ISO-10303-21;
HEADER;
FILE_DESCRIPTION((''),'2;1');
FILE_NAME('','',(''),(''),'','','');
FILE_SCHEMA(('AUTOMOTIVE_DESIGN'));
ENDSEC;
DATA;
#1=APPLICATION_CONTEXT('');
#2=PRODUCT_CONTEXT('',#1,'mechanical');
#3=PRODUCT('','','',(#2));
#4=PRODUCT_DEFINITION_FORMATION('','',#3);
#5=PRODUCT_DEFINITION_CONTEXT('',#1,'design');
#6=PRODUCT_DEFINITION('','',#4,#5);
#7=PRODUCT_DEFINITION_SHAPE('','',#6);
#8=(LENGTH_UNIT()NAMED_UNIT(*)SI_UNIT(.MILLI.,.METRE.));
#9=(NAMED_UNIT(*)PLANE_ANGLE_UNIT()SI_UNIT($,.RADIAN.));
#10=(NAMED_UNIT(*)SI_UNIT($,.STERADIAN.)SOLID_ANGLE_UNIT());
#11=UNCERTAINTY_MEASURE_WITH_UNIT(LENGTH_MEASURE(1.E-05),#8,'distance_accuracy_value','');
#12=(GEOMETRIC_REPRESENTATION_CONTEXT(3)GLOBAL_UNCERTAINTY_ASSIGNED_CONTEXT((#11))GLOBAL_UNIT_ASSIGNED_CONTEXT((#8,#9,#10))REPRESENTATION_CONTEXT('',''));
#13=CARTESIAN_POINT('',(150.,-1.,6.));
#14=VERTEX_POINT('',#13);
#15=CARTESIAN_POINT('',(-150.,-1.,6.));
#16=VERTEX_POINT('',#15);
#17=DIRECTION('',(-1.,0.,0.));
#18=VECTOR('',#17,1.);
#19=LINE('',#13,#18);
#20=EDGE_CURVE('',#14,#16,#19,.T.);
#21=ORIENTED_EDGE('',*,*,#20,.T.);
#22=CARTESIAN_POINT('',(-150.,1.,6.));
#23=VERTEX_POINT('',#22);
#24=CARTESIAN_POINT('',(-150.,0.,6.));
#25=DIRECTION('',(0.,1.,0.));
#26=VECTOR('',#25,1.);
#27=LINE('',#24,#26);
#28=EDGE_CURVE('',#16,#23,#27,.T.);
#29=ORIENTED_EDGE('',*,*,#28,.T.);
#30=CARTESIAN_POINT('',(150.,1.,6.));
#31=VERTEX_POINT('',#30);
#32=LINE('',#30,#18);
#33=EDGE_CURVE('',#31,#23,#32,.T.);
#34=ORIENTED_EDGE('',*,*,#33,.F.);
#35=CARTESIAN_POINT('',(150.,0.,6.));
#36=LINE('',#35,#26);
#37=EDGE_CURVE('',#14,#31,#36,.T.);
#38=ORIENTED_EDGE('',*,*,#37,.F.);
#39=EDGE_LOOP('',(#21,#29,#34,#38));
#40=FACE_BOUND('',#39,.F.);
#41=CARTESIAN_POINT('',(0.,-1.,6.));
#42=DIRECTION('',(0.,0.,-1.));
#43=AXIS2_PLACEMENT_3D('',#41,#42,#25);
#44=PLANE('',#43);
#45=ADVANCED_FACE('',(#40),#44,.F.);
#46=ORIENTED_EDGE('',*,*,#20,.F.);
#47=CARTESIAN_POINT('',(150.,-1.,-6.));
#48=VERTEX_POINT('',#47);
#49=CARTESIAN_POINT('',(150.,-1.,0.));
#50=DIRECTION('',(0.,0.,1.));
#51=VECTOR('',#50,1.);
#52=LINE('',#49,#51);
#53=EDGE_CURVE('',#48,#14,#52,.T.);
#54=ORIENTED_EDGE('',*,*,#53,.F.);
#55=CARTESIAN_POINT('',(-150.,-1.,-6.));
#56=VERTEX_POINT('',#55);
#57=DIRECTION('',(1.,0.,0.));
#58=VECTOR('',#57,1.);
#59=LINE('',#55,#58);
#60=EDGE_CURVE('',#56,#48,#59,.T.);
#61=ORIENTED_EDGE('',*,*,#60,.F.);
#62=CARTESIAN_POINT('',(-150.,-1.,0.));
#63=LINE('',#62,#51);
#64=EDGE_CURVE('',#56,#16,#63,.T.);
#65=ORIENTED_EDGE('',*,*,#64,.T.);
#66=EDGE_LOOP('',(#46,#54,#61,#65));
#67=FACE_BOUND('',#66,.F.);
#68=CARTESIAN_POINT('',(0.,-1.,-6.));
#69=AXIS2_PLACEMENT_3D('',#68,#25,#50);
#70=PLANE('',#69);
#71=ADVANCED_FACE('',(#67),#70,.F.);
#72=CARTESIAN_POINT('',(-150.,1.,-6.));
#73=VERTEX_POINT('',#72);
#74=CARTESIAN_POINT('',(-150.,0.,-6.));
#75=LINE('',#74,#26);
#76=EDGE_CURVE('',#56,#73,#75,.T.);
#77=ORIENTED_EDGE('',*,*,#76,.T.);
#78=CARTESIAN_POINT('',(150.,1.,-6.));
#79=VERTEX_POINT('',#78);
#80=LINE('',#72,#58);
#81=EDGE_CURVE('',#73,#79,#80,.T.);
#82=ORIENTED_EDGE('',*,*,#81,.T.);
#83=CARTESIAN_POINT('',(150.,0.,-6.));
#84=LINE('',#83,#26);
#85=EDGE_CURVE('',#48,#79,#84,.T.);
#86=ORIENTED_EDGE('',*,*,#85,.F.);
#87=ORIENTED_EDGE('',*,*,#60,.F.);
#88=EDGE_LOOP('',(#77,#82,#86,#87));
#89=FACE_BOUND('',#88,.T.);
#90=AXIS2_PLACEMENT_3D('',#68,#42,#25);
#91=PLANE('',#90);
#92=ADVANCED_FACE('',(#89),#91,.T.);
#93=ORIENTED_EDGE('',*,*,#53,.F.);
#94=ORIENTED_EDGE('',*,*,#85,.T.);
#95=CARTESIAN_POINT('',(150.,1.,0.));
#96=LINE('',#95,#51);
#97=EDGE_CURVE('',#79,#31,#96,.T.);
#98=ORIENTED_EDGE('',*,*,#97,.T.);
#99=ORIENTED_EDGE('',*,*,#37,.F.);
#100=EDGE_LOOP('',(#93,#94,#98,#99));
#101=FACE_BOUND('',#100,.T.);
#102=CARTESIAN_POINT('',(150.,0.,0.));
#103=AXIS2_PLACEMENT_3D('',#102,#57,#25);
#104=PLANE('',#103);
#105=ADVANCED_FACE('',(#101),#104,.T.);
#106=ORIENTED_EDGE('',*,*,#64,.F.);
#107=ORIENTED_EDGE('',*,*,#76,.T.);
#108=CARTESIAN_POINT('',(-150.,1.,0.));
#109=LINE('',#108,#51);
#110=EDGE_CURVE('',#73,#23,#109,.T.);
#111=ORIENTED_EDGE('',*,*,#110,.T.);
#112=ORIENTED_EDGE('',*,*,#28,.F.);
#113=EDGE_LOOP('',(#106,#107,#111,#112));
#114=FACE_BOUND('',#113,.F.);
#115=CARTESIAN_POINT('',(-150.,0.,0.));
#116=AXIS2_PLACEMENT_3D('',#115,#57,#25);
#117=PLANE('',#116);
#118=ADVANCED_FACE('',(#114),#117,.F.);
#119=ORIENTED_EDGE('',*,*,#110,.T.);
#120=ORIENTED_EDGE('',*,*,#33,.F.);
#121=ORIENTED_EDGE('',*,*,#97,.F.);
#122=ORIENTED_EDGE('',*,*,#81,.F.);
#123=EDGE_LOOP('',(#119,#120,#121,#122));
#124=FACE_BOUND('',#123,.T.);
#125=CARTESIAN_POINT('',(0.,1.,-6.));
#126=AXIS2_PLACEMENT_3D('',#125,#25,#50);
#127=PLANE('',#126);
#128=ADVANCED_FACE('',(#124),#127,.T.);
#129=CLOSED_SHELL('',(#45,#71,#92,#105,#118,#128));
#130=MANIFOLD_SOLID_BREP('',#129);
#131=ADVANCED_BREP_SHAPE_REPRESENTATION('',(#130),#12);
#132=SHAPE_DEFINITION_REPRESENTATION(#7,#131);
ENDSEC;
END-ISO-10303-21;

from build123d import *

# Parameters (mm, degrees)
F0_W     = 2
F0_H     = 12
F1_DEPTH = 150


# Not quite as in the source:
# - the program builds the solid bodies; features that only make, move or delete a surface that nothing else refers to are left out


with BuildPart() as f1:
    # F0 (on Right) → F1 (new body, symmetric)
    with BuildSketch(Plane.YZ):
        Rectangle(F0_W, F0_H)
    extrude(amount=F1_DEPTH, both=True)


solid = f1.part
